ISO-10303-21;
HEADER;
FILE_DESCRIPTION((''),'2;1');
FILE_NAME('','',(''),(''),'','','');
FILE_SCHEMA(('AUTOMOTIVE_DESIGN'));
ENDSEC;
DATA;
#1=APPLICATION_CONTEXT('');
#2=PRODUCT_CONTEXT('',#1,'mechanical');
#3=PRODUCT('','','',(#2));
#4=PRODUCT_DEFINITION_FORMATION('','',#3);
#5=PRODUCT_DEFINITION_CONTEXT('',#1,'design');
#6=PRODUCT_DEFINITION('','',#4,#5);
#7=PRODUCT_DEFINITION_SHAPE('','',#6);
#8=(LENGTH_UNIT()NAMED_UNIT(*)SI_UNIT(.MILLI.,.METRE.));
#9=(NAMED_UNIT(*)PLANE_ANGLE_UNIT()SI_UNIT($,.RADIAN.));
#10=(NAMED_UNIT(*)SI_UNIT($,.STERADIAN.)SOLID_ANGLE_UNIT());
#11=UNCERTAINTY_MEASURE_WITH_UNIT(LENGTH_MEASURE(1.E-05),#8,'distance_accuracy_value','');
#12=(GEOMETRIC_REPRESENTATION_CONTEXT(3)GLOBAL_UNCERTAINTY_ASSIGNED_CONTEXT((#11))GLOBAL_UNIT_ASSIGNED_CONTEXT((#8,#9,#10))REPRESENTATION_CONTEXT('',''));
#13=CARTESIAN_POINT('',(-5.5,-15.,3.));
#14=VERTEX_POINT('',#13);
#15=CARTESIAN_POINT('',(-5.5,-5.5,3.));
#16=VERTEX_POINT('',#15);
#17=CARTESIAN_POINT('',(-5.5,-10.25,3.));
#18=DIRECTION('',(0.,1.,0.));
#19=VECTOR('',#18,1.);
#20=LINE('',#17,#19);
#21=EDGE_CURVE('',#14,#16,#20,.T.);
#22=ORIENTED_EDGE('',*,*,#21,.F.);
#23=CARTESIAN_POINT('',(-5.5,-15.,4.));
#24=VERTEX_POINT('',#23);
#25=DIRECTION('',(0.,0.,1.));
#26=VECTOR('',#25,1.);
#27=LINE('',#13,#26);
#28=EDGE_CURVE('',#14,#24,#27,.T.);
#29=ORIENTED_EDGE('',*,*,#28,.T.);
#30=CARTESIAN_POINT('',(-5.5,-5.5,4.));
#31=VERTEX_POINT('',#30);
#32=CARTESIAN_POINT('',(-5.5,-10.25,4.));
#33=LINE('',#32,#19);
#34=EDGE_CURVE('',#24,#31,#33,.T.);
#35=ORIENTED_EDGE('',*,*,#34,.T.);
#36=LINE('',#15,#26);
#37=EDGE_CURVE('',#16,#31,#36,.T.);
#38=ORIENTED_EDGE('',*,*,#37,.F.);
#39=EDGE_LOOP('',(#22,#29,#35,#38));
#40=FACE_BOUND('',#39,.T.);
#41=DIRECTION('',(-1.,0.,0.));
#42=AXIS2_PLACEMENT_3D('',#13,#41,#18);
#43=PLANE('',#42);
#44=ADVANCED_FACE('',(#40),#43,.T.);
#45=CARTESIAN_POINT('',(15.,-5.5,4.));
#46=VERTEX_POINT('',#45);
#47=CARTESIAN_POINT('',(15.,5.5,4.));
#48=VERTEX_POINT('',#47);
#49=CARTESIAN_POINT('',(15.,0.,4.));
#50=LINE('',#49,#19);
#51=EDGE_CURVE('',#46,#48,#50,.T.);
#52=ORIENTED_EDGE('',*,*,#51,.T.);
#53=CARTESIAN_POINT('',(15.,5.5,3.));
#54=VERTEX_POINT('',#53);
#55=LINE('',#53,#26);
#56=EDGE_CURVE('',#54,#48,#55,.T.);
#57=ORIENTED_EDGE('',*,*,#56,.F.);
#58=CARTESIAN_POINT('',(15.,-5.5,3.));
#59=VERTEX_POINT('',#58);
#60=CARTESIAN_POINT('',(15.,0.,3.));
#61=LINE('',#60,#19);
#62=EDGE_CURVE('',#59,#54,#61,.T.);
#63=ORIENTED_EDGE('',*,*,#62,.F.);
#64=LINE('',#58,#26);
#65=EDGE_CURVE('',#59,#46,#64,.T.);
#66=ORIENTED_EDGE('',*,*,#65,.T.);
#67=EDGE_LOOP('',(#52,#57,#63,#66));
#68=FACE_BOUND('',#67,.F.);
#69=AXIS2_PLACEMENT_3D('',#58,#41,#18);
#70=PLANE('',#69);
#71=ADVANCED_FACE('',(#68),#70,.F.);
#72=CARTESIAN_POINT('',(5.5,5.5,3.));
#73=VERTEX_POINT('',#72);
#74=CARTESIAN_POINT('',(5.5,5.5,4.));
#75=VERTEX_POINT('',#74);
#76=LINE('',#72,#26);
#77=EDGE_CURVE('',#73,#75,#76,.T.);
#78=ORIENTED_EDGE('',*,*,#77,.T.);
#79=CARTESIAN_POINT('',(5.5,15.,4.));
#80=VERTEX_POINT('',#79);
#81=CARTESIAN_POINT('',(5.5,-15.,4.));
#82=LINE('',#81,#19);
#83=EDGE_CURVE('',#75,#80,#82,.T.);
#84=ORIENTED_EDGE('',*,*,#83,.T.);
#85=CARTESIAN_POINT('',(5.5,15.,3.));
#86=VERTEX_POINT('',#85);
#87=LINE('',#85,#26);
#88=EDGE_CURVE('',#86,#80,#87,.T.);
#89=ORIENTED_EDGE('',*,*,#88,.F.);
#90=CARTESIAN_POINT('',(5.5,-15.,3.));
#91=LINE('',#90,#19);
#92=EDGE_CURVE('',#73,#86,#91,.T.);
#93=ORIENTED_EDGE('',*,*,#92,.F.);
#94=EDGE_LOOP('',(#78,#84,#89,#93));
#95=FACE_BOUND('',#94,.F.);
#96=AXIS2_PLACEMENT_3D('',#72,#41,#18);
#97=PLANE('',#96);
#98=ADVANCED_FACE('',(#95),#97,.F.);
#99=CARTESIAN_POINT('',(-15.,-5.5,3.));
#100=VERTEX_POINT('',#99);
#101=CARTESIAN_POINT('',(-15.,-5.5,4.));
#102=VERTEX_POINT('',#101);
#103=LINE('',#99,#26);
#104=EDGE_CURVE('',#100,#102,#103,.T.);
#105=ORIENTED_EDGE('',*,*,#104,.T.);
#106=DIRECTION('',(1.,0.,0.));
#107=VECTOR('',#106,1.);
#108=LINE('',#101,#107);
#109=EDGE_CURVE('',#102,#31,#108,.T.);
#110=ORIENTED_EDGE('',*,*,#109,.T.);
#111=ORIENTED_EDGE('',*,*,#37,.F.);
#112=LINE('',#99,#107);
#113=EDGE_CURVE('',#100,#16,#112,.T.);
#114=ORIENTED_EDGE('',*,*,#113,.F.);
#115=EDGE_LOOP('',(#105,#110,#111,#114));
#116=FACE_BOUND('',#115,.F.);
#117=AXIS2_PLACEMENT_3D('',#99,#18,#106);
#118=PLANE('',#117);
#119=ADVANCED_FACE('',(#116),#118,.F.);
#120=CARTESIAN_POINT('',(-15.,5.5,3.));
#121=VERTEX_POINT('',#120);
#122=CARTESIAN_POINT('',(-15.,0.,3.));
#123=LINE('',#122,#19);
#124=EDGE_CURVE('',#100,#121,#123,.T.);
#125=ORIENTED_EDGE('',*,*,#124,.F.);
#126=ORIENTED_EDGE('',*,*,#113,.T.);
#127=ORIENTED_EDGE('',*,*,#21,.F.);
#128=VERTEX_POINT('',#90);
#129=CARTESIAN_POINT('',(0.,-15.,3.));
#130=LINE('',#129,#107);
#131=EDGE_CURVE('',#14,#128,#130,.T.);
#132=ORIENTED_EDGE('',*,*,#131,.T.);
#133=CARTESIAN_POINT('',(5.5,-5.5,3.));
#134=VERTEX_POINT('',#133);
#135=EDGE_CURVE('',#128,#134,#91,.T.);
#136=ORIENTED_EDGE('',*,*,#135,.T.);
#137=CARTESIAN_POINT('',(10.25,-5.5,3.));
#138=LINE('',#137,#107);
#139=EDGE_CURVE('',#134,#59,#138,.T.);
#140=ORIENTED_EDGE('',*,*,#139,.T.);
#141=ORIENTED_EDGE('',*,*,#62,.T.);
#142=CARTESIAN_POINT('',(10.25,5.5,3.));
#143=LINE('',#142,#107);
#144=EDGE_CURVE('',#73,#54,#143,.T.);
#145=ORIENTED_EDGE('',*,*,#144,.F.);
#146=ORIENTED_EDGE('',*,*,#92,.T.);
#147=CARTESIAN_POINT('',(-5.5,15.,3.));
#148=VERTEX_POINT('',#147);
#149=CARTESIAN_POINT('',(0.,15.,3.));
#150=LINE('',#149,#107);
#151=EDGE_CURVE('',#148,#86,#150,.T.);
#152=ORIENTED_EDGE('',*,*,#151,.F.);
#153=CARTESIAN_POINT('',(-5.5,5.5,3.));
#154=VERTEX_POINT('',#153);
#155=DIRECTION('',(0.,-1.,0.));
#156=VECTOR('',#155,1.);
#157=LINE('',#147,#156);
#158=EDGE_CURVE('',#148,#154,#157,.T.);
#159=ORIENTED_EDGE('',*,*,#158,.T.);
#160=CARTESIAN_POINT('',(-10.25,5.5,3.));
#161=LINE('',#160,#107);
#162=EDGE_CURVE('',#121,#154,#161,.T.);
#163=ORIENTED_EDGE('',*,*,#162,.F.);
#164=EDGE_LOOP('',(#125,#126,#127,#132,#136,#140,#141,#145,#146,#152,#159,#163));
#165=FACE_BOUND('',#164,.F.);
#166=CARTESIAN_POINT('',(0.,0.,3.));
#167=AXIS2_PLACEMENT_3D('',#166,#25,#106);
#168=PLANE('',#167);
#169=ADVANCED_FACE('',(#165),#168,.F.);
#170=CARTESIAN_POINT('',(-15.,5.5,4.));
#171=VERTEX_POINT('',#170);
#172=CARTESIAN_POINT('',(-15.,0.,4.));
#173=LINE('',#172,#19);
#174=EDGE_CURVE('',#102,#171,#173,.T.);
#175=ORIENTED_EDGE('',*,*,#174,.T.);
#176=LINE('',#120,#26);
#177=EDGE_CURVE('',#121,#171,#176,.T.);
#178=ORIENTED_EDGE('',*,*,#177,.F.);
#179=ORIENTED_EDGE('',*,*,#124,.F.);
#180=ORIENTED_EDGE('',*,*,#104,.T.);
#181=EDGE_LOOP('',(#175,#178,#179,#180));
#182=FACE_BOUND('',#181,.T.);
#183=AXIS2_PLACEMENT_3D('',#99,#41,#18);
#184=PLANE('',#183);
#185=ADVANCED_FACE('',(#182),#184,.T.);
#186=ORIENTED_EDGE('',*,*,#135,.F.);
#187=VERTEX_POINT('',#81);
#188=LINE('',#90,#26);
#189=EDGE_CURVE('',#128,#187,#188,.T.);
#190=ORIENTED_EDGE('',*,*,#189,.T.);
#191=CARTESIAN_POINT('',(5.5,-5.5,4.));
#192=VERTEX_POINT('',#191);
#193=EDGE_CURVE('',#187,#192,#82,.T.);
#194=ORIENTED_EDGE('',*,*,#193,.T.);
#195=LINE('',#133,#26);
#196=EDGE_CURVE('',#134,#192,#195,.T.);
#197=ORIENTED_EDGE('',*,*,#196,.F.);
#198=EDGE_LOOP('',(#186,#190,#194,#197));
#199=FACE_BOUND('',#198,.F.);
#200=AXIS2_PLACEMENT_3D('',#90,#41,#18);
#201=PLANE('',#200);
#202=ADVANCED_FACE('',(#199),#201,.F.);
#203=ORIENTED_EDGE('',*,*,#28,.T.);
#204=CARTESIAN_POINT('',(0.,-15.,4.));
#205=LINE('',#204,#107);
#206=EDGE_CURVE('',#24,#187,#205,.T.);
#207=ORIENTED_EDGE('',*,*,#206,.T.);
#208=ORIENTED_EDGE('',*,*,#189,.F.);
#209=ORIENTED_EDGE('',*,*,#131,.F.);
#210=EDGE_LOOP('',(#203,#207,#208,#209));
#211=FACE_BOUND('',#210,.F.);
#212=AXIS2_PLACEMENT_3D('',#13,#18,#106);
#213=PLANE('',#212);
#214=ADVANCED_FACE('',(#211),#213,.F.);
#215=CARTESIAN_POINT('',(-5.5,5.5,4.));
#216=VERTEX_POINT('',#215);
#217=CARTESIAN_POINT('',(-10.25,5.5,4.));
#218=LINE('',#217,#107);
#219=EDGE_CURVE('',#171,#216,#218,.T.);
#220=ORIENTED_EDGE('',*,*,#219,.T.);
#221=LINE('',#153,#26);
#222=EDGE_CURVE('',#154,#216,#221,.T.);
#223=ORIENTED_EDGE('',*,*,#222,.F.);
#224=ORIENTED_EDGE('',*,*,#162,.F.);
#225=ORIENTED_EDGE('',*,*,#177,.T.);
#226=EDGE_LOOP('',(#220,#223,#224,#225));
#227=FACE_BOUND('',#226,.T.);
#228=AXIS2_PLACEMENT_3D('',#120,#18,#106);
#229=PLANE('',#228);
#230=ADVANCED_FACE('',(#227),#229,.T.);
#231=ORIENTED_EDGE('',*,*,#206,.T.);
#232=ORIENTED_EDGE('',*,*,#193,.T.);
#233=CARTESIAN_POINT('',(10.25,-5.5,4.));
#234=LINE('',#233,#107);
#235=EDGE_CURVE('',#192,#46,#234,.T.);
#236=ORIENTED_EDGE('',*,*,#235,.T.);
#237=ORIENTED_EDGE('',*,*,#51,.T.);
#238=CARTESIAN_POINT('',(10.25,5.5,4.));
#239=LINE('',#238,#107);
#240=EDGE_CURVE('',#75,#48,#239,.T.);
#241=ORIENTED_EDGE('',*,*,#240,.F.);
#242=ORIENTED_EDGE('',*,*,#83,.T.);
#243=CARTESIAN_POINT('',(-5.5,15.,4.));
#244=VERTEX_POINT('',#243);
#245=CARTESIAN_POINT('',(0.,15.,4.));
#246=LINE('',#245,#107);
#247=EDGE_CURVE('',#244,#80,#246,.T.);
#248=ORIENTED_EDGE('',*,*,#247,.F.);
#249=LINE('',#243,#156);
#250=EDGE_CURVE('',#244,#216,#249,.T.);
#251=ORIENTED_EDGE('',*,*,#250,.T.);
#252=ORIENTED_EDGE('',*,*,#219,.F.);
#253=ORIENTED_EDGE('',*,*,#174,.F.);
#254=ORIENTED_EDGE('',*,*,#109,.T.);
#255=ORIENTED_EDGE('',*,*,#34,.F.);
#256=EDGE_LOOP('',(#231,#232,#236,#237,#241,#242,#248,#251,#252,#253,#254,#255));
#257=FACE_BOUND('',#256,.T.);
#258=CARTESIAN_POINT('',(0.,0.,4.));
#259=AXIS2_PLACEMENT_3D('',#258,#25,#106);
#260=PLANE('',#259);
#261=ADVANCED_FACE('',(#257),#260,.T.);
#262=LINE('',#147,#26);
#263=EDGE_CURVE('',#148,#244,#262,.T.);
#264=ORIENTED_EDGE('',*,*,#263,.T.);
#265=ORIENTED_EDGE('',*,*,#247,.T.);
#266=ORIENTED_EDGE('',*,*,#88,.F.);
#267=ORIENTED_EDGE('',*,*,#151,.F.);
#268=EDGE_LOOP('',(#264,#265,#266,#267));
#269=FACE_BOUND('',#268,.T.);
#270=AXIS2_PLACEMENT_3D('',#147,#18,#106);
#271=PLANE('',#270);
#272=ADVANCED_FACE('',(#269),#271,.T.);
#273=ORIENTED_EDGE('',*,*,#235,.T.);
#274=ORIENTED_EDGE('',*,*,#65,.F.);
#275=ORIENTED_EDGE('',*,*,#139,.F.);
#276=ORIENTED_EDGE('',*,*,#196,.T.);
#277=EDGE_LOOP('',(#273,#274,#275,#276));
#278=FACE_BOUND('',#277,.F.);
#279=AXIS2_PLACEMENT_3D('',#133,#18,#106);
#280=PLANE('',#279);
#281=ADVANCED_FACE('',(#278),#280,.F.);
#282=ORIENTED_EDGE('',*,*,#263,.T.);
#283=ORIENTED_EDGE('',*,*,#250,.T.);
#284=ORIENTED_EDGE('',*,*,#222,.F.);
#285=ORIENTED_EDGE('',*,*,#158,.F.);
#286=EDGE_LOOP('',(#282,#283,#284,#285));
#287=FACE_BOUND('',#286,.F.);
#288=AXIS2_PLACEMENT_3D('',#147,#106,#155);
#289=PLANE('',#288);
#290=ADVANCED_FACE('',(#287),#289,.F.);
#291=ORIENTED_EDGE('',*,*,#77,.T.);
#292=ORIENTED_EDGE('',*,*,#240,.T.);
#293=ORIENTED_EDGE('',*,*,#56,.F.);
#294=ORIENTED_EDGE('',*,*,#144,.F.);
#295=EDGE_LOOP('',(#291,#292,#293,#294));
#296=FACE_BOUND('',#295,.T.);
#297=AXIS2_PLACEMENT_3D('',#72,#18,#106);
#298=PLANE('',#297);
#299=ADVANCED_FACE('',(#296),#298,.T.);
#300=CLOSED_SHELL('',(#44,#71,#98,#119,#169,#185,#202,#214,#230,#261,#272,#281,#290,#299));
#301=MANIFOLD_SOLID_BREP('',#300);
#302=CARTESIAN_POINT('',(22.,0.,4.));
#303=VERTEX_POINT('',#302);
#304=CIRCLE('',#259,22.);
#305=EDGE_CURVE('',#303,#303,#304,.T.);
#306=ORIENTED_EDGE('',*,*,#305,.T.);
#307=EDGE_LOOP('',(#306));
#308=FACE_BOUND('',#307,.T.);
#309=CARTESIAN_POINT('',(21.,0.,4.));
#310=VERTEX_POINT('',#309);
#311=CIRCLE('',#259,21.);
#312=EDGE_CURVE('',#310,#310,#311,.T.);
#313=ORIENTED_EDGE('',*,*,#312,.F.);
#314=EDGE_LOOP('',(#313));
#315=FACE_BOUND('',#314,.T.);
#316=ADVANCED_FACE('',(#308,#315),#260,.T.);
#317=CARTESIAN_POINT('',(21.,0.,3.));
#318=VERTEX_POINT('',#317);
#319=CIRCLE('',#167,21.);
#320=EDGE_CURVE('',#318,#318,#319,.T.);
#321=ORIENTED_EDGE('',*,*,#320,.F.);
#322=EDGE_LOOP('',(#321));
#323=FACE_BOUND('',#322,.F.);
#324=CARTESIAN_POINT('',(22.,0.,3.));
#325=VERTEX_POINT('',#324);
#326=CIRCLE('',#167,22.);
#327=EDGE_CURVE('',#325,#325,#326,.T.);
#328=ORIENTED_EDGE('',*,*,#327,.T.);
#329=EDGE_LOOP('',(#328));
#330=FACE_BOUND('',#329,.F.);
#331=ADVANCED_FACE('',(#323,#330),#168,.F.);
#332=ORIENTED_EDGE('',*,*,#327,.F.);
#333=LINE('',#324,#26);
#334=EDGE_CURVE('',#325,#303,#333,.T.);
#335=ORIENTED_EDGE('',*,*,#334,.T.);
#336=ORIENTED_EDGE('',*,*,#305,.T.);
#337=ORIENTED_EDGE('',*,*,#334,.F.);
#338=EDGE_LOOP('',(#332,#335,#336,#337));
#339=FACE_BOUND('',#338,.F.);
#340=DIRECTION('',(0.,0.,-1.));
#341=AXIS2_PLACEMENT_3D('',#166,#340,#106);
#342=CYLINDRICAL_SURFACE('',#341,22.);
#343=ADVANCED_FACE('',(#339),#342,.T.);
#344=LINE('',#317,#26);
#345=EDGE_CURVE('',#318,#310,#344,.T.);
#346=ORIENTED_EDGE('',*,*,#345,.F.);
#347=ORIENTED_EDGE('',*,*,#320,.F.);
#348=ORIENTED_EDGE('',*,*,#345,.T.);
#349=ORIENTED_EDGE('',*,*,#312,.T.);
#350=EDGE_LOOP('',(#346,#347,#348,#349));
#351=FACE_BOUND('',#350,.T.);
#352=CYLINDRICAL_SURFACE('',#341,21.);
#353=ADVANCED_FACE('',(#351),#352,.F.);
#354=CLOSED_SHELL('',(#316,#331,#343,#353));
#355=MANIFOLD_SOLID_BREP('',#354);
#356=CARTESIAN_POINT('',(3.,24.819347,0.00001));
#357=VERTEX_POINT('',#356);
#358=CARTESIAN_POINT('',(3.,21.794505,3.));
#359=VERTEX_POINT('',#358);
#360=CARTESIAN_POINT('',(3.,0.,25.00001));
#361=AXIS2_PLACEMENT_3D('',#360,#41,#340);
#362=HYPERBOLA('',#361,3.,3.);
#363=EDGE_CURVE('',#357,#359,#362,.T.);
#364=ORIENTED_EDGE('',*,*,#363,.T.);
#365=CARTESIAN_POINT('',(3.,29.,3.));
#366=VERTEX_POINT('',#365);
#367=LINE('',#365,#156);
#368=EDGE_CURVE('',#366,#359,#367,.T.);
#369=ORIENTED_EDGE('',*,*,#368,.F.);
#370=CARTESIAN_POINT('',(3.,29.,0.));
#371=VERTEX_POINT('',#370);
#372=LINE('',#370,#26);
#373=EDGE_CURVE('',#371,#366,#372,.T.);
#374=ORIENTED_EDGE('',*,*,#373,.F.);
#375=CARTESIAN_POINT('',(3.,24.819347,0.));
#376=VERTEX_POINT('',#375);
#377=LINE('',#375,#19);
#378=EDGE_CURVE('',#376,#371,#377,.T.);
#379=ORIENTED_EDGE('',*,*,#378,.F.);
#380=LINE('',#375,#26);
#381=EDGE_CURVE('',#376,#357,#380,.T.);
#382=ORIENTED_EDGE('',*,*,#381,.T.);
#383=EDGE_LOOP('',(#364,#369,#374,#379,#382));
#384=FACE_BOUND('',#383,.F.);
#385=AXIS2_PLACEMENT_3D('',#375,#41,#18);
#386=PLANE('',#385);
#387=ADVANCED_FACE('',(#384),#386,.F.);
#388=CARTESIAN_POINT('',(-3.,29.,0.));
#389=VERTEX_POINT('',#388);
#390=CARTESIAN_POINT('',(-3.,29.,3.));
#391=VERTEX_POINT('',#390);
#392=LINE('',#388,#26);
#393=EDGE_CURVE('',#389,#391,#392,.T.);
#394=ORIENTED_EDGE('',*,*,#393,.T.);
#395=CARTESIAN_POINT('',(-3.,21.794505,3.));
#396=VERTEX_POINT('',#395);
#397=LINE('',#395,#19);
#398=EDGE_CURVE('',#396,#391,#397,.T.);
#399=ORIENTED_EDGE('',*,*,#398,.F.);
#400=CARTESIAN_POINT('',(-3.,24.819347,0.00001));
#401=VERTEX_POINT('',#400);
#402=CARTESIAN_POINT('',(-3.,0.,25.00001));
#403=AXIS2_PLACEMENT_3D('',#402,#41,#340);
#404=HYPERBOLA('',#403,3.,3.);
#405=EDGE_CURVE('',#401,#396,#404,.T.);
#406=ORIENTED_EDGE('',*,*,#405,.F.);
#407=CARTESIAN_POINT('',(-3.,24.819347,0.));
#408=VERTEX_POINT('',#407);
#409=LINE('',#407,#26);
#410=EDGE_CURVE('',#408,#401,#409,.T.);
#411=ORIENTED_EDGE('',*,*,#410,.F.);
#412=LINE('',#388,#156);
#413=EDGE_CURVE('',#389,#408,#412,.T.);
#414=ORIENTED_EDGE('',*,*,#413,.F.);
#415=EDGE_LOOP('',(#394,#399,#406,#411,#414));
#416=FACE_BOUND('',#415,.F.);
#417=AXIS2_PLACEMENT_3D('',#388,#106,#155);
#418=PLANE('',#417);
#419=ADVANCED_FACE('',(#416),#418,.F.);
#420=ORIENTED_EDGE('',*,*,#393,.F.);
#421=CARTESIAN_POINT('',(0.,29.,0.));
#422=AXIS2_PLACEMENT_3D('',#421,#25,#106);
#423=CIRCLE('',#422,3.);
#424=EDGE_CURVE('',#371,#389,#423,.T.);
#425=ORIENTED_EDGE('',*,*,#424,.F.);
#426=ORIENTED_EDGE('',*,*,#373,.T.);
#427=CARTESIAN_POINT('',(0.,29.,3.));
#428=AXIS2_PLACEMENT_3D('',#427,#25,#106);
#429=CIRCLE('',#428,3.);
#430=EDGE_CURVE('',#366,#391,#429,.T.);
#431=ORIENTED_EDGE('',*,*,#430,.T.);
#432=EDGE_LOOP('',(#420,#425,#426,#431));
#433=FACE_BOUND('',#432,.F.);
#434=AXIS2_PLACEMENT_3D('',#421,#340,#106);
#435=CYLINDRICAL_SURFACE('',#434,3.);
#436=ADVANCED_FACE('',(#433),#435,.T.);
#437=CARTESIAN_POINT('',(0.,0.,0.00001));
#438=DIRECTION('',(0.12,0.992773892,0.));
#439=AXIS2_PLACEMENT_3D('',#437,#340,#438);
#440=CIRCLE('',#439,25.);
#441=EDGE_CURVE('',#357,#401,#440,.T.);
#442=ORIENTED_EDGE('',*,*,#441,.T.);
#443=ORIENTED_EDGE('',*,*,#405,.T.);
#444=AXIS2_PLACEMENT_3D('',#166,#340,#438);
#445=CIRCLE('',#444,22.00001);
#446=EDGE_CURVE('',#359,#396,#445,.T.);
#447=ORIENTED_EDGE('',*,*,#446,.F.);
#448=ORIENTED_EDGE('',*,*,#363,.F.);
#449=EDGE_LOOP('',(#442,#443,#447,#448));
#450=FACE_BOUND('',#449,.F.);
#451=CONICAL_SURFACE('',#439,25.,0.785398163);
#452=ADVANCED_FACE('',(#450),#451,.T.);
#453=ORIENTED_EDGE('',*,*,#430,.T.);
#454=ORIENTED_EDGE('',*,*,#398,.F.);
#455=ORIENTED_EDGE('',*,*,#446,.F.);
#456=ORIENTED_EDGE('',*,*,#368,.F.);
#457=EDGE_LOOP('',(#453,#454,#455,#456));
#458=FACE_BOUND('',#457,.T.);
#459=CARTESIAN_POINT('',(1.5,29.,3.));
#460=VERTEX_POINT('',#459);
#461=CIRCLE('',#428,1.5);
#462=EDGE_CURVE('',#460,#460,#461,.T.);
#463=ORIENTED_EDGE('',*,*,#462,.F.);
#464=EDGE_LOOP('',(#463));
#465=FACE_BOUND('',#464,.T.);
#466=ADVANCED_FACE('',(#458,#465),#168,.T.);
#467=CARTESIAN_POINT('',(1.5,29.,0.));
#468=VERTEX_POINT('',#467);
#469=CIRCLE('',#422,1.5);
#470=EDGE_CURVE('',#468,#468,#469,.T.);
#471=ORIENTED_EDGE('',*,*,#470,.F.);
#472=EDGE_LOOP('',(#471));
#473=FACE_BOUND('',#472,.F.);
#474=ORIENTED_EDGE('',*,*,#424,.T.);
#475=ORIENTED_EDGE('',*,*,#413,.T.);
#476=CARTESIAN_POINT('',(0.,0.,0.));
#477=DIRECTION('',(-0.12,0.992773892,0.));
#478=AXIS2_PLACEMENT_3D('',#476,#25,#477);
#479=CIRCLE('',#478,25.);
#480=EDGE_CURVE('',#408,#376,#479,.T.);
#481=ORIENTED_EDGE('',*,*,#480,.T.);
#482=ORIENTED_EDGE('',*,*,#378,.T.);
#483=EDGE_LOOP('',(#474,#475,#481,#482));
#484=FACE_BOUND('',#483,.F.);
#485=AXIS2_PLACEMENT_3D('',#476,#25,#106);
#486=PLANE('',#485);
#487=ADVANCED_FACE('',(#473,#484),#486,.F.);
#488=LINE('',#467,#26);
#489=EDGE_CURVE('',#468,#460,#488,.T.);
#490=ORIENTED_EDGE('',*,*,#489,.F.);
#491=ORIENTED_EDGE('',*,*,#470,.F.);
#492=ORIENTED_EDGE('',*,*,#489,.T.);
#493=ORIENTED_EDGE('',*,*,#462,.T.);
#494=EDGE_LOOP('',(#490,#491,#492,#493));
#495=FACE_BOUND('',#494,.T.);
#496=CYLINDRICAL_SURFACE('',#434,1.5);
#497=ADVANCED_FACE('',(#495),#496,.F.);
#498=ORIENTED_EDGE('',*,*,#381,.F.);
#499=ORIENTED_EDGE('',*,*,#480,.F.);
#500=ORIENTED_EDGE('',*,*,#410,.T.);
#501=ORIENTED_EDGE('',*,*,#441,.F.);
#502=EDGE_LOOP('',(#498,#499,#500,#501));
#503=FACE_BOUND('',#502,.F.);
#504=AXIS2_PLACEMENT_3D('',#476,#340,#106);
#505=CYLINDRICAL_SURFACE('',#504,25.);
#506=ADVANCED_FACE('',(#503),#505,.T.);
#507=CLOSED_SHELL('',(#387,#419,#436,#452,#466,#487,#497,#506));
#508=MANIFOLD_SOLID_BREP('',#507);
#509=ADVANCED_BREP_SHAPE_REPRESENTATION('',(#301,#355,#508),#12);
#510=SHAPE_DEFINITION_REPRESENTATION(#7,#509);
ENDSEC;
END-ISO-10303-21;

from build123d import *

# Parameters (mm, degrees)
F0_R     = 25
F1_DEPTH = 3
F2_W     = 11
F2_H     = 11
F2_H_2   = 9.5
F2_W_2   = 9.5
F3_DEPTH = 1
F2_R     = 22
F2_R_2   = 21
F4_R     = 1.5
F5_DEPTH = 3
F6_SIZE  = 2.99999


# Not quite as in the source:
# - a fillet or chamfer is up to 0.001 mm smaller than in the source, because OpenCascade refuses the exact size


with BuildPart() as f1:
    # F0 (on Top) → F1 (new body)
    with BuildSketch(Plane.XY):
        Circle(F0_R)
    extrude(amount=F1_DEPTH)

    # F4 (on Top) → F5 (join, through all)
    with BuildSketch(Plane.XY):
        with BuildLine():
            Line((3, 24.819347292), (3, 29))
            ThreePointArc((3, 29), (0, 26), (-3, 29))
            Line((-3, 29), (-3, 24.819347292))
            ThreePointArc((-3, 24.819347292), (0, 25), (3, 24.819347292))
        make_face()
        with BuildLine():
            ThreePointArc((-3, 29), (0, 26), (3, 29))
            ThreePointArc((3, 29), (0, 32), (-3, 29))
        make_face()
        with Locations((0, 29)):
            Circle(F4_R, mode=Mode.SUBTRACT)
    extrude(amount=F5_DEPTH)

    # F6 (size 3 in the source; OpenCascade refuses exactly that, so slightly less here)
    f6_edges = [f1.edges().sort_by_distance(p)[0] for p in [
        (0, -25, 3),
    ]]
    chamfer(f6_edges, length=F6_SIZE)


with BuildPart() as f3:
    # F2 (on face) → F3 (new body)
    with BuildSketch(Plane.XY.offset(3)):
        Rectangle(F2_W, F2_H)
        with Locations((0, 10.25)):
            Rectangle(F2_W, F2_H_2)
        with Locations((-10.25, 0)):
            Rectangle(F2_W_2, F2_H)
        with Locations((0, -10.25)):
            Rectangle(F2_W, F2_H_2)
        with Locations((10.25, 0)):
            Rectangle(F2_W_2, F2_H)
    extrude(amount=F3_DEPTH)


with BuildPart() as f3b:
    # F2 (on face) → F3, piece 2 (new body)
    with BuildSketch(Plane.XY.offset(3)):
        Circle(F2_R)
        Circle(F2_R_2, mode=Mode.SUBTRACT)
    extrude(amount=F3_DEPTH)


solid = Compound([f1.part, f3.part, f3b.part])
